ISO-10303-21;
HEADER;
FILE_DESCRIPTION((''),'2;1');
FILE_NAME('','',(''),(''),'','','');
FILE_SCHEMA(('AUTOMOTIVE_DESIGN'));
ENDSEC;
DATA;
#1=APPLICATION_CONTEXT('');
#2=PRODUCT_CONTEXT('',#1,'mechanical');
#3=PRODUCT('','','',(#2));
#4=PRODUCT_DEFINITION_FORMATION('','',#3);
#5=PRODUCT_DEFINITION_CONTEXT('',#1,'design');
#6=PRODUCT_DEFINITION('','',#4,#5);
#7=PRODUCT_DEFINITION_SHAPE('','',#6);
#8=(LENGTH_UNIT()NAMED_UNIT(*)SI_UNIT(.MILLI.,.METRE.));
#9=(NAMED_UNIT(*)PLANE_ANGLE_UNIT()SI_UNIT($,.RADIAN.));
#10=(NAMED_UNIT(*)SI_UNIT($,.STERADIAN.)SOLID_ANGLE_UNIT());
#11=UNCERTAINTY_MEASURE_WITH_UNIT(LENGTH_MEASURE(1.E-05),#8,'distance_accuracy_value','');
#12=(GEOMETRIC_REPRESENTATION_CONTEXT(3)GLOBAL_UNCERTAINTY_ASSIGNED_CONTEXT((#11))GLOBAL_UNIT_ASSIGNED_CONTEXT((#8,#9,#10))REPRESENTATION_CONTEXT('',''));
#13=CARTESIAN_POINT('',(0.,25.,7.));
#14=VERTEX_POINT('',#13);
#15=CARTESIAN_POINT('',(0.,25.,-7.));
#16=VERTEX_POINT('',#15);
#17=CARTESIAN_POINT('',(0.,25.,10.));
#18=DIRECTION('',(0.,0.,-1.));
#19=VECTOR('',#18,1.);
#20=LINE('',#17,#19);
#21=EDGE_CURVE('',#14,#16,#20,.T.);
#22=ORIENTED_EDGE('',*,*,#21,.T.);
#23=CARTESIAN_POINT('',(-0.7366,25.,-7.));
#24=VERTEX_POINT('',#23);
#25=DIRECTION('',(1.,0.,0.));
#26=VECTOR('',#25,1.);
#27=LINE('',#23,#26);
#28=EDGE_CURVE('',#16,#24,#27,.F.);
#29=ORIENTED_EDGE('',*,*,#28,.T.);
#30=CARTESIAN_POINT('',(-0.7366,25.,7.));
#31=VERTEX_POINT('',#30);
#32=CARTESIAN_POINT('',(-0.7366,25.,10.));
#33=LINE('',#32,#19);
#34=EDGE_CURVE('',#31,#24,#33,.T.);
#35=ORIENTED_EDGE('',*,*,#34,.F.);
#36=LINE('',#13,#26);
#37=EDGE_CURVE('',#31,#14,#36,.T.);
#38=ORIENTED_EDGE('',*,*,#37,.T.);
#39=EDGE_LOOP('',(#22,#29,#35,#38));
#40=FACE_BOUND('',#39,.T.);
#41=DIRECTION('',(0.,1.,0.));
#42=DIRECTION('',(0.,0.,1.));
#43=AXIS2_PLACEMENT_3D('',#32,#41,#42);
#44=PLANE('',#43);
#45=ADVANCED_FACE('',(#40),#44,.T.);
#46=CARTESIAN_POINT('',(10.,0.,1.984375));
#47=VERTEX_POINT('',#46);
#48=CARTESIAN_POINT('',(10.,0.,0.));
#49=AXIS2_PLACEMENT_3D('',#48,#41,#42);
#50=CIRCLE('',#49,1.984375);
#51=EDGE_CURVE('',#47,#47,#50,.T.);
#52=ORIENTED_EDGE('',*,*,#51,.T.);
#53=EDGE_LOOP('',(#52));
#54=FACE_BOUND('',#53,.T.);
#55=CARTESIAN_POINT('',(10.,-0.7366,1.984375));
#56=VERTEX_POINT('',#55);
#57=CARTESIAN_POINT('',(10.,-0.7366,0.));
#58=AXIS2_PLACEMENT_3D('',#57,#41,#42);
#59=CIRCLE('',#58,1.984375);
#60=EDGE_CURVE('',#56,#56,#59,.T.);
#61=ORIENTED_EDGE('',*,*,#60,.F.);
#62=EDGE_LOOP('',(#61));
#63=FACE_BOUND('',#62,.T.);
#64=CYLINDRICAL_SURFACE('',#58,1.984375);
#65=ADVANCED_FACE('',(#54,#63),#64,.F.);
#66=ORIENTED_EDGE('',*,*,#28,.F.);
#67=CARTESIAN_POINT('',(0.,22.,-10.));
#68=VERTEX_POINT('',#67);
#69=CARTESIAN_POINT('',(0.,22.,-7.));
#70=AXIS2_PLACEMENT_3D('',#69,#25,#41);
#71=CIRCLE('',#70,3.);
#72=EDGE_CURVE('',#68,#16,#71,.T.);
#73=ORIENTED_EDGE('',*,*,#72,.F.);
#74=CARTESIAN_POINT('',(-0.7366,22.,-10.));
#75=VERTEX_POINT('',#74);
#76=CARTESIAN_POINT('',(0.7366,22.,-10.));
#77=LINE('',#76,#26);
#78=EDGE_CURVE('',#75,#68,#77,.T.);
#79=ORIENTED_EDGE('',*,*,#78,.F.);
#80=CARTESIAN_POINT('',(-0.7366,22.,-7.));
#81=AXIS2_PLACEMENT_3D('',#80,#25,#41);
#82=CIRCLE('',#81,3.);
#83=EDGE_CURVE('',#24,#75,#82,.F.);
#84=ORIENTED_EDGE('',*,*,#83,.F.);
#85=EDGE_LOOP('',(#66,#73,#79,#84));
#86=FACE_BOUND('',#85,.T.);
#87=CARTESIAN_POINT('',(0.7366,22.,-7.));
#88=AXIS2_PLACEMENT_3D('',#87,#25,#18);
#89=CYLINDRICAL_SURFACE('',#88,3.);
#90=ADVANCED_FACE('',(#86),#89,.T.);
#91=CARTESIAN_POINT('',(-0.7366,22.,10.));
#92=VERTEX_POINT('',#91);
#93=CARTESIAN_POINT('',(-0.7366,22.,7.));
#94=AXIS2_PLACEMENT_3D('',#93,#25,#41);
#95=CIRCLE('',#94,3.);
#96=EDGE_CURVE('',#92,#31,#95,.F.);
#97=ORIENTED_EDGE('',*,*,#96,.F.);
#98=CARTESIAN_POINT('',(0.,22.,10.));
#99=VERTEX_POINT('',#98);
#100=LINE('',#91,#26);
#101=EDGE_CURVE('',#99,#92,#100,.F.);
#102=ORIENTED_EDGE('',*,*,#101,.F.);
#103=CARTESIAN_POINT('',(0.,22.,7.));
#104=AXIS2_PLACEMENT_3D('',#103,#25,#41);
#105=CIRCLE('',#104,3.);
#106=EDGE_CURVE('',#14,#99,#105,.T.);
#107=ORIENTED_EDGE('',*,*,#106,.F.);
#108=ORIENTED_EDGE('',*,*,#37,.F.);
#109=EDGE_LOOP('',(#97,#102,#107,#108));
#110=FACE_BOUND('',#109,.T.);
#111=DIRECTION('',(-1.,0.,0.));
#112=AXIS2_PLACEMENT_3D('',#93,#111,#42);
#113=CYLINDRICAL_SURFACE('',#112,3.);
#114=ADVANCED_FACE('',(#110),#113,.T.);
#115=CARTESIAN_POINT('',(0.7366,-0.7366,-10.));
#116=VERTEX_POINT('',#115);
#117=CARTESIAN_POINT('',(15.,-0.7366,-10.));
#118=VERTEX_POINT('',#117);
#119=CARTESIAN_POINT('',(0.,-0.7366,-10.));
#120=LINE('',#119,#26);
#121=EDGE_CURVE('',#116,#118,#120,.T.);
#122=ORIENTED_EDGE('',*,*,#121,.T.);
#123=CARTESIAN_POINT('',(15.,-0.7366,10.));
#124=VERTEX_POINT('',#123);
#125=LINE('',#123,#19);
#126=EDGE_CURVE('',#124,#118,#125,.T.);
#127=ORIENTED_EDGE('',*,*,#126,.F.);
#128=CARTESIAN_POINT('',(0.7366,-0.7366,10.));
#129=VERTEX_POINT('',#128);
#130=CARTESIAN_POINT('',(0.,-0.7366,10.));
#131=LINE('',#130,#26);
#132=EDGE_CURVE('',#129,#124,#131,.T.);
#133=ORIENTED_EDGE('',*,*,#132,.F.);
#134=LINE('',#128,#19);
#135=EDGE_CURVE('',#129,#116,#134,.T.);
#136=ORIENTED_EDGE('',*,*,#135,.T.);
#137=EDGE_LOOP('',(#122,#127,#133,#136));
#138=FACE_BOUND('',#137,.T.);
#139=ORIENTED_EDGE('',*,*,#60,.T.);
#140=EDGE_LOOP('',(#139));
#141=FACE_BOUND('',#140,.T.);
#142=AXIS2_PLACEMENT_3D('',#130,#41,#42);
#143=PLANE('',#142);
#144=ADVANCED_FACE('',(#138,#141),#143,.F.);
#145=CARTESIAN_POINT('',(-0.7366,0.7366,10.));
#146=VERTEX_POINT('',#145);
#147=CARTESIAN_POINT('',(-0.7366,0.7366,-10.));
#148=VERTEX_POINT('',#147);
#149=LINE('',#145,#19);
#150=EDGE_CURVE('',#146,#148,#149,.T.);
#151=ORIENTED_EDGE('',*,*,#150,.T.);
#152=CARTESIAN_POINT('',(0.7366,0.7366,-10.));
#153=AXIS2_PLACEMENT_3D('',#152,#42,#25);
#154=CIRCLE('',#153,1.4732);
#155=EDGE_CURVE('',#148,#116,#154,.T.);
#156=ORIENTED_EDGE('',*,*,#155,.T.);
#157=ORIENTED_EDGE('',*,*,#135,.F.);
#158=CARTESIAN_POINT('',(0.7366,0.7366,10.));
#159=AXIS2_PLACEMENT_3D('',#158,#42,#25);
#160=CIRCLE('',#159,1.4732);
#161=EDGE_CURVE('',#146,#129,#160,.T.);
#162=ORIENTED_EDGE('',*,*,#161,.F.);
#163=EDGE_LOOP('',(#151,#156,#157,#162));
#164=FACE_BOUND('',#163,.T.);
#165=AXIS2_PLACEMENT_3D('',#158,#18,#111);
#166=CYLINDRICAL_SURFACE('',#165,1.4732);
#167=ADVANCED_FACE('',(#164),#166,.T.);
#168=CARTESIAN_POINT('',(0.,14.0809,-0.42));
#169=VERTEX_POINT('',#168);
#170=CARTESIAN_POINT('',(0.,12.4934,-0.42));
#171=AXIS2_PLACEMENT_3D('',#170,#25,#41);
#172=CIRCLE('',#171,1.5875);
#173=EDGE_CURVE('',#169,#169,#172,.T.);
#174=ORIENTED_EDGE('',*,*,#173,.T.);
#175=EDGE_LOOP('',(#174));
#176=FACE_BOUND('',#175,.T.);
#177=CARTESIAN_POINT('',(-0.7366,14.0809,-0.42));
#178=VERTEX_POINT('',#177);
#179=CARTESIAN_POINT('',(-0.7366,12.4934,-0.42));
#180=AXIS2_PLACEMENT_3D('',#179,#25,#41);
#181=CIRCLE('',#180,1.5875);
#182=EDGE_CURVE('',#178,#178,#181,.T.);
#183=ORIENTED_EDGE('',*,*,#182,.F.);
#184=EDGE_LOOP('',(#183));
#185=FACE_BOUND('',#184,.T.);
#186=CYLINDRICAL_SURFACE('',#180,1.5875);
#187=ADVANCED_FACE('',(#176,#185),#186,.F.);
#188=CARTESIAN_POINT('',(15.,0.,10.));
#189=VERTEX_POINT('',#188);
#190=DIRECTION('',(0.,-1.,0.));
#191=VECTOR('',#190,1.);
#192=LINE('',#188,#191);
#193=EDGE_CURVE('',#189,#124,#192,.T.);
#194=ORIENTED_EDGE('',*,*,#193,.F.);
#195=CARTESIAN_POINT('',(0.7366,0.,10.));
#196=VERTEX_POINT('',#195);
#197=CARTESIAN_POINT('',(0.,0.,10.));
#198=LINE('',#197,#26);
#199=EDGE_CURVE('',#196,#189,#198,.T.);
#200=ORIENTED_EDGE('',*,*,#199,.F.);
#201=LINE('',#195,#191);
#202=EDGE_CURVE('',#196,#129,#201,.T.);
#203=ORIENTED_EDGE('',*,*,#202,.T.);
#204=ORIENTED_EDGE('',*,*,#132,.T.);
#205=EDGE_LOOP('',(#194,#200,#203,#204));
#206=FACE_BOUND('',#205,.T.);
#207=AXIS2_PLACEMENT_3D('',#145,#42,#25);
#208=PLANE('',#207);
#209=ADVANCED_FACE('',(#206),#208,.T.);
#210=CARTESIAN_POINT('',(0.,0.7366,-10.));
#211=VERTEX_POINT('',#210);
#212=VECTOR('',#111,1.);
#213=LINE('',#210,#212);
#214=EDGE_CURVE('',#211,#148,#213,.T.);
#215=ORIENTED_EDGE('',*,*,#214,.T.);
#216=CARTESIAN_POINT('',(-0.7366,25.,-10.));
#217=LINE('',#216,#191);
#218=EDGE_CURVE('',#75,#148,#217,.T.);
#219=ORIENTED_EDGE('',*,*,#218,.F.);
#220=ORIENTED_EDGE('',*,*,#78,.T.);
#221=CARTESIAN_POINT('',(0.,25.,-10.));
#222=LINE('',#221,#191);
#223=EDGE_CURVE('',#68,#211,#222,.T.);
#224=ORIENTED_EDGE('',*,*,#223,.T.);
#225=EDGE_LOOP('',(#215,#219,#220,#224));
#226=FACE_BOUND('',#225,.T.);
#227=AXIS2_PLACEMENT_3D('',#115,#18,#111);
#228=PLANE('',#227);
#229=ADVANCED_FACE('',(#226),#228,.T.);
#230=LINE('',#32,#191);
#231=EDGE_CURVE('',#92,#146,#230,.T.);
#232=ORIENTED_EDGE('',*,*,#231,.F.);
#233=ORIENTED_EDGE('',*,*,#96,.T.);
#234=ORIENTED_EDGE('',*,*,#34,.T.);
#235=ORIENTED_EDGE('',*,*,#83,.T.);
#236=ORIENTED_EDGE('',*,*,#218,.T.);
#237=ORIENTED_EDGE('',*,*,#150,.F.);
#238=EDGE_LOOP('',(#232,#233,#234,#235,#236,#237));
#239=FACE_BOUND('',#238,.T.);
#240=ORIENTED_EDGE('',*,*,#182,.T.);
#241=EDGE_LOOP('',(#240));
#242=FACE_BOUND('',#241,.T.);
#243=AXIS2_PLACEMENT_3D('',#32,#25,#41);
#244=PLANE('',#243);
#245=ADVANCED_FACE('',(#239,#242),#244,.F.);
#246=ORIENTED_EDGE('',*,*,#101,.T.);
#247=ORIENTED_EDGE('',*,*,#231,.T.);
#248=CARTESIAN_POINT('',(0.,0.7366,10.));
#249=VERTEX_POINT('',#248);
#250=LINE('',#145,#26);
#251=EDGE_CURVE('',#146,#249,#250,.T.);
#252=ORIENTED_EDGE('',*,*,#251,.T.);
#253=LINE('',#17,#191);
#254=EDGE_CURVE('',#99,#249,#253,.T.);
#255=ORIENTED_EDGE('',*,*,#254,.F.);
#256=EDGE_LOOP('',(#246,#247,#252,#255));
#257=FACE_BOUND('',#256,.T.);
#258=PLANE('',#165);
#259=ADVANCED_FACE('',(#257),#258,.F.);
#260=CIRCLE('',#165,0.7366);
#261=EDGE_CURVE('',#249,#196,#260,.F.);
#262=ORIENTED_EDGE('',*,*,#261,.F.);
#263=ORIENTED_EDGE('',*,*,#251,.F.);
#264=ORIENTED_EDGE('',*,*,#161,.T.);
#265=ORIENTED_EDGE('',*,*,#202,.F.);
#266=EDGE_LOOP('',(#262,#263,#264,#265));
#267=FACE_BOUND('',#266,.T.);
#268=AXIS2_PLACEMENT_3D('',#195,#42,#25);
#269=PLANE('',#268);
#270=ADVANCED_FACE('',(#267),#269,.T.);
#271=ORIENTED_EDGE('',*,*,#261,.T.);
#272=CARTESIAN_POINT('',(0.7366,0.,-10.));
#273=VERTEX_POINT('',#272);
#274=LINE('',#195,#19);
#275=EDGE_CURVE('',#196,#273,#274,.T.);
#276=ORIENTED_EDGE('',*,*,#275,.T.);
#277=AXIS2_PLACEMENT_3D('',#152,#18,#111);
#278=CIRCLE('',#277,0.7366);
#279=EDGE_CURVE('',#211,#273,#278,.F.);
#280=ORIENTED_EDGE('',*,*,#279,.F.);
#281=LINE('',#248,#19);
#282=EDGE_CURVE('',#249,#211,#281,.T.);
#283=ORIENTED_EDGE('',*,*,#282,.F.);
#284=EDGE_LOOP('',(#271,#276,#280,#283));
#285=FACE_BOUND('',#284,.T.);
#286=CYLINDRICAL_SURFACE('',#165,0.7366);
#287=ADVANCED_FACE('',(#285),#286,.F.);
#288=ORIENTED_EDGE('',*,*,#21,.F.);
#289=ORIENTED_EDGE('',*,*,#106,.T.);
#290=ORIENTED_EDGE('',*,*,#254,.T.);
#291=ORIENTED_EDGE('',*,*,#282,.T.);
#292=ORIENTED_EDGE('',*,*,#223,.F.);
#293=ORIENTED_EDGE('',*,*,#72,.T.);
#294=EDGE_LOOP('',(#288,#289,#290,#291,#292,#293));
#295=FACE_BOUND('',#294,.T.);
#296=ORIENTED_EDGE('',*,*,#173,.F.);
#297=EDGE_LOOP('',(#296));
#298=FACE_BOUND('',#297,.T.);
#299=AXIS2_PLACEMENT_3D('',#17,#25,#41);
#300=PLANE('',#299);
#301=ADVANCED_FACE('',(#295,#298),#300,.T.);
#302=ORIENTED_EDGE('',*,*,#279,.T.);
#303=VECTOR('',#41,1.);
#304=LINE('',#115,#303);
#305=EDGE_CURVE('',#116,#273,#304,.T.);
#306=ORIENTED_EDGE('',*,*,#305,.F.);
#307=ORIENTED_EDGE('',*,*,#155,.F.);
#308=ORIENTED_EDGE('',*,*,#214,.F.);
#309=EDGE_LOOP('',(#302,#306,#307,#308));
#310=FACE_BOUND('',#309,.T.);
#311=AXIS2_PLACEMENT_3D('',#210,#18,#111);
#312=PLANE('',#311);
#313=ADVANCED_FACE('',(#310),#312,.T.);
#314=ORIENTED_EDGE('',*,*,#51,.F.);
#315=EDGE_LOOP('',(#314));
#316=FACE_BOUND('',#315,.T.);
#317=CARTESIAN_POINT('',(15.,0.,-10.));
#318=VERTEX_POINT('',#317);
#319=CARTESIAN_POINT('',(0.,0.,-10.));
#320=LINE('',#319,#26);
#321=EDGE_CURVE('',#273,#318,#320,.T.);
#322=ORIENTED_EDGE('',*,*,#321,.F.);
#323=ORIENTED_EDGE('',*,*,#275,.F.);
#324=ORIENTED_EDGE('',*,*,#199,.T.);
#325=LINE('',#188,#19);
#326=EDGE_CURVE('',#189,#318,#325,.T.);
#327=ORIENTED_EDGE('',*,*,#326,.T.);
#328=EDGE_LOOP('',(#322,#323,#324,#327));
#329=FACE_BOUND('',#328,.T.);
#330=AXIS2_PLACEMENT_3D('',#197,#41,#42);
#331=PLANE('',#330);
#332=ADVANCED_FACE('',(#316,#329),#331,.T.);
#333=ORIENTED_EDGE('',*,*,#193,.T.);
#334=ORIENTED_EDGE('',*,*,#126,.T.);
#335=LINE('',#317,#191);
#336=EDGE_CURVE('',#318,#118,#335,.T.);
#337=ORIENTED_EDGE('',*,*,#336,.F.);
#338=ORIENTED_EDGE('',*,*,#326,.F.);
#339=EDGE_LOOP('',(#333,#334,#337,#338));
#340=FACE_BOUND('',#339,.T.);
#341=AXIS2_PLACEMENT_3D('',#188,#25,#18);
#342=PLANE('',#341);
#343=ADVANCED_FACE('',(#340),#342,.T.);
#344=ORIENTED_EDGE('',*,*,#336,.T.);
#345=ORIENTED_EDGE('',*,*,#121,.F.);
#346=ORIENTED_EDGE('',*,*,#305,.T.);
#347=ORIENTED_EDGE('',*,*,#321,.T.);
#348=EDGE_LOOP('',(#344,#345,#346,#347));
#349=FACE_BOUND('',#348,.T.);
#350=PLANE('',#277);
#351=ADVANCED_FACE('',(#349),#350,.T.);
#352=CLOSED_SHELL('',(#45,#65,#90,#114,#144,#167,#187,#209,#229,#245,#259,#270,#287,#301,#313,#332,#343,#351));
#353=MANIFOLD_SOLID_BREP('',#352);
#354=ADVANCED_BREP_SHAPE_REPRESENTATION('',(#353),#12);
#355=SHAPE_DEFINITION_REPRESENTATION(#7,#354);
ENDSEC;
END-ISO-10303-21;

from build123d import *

# Parameters (mm, degrees)
BASE_FLANGE1_DEPTH = 10
SKETCH7_R          = 1.5875
CUT_EXTRUDE1_DEPTH = 31.822070015
SKETCH8_R          = 1.984375
CUT_EXTRUDE2_DEPTH = 31.822070015
FILLET1_R          = 3


# Sheet-metal steps are written as plain solids
with BuildPart() as part:
    # Sketch2 → Base-Flange1 (new, symmetric)
    with BuildSketch(Plane.XY):
        with BuildLine():
            Line((0, 25), (0, 0.7366))
            ThreePointArc((0, 0.7366), (0.215745145, 0.215745145), (0.7366, 0))
            Line((0.7366, 0), (15, 0))
            Line((15, 0), (15, -0.7366))
            Line((15, -0.7366), (0.7366, -0.7366))
            ThreePointArc((0.7366, -0.7366), (-0.30510971, -0.30510971), (-0.7366, 0.7366))
            Line((-0.7366, 0.7366), (-0.7366, 25))
            Line((-0.7366, 25), (0, 25))
        make_face()
    extrude(amount=BASE_FLANGE1_DEPTH, both=True)

    # Sketch7 → Cut-Extrude1 (cut, through all)
    with BuildSketch(Plane(origin=(0, 0, 0), x_dir=(0, 0, -1), z_dir=(1, 0, 0))):
        with Locations(Location((0.42, 12.4934, 0), (0, 0, 90))):
            Circle(SKETCH7_R)
    extrude(amount=-CUT_EXTRUDE1_DEPTH, mode=Mode.SUBTRACT)

    # Sketch8 → Cut-Extrude2 (cut, through all)
    with BuildSketch(Plane(origin=(0, 0, 0), x_dir=(1, 0, 0), z_dir=(0, 1, 0))):
        with Locations(Location((10, 0, 0), (0, 0, 270))):
            Circle(SKETCH8_R)
    extrude(amount=-CUT_EXTRUDE2_DEPTH, mode=Mode.SUBTRACT)

    # Fillet1
    fillet1_edges = [part.edges().sort_by_distance(p)[0] for p in [
        (-0.3683, 25, 10),
        (-0.3683, 25, -10),
    ]]
    fillet(fillet1_edges, radius=FILLET1_R)


solid = part.part
